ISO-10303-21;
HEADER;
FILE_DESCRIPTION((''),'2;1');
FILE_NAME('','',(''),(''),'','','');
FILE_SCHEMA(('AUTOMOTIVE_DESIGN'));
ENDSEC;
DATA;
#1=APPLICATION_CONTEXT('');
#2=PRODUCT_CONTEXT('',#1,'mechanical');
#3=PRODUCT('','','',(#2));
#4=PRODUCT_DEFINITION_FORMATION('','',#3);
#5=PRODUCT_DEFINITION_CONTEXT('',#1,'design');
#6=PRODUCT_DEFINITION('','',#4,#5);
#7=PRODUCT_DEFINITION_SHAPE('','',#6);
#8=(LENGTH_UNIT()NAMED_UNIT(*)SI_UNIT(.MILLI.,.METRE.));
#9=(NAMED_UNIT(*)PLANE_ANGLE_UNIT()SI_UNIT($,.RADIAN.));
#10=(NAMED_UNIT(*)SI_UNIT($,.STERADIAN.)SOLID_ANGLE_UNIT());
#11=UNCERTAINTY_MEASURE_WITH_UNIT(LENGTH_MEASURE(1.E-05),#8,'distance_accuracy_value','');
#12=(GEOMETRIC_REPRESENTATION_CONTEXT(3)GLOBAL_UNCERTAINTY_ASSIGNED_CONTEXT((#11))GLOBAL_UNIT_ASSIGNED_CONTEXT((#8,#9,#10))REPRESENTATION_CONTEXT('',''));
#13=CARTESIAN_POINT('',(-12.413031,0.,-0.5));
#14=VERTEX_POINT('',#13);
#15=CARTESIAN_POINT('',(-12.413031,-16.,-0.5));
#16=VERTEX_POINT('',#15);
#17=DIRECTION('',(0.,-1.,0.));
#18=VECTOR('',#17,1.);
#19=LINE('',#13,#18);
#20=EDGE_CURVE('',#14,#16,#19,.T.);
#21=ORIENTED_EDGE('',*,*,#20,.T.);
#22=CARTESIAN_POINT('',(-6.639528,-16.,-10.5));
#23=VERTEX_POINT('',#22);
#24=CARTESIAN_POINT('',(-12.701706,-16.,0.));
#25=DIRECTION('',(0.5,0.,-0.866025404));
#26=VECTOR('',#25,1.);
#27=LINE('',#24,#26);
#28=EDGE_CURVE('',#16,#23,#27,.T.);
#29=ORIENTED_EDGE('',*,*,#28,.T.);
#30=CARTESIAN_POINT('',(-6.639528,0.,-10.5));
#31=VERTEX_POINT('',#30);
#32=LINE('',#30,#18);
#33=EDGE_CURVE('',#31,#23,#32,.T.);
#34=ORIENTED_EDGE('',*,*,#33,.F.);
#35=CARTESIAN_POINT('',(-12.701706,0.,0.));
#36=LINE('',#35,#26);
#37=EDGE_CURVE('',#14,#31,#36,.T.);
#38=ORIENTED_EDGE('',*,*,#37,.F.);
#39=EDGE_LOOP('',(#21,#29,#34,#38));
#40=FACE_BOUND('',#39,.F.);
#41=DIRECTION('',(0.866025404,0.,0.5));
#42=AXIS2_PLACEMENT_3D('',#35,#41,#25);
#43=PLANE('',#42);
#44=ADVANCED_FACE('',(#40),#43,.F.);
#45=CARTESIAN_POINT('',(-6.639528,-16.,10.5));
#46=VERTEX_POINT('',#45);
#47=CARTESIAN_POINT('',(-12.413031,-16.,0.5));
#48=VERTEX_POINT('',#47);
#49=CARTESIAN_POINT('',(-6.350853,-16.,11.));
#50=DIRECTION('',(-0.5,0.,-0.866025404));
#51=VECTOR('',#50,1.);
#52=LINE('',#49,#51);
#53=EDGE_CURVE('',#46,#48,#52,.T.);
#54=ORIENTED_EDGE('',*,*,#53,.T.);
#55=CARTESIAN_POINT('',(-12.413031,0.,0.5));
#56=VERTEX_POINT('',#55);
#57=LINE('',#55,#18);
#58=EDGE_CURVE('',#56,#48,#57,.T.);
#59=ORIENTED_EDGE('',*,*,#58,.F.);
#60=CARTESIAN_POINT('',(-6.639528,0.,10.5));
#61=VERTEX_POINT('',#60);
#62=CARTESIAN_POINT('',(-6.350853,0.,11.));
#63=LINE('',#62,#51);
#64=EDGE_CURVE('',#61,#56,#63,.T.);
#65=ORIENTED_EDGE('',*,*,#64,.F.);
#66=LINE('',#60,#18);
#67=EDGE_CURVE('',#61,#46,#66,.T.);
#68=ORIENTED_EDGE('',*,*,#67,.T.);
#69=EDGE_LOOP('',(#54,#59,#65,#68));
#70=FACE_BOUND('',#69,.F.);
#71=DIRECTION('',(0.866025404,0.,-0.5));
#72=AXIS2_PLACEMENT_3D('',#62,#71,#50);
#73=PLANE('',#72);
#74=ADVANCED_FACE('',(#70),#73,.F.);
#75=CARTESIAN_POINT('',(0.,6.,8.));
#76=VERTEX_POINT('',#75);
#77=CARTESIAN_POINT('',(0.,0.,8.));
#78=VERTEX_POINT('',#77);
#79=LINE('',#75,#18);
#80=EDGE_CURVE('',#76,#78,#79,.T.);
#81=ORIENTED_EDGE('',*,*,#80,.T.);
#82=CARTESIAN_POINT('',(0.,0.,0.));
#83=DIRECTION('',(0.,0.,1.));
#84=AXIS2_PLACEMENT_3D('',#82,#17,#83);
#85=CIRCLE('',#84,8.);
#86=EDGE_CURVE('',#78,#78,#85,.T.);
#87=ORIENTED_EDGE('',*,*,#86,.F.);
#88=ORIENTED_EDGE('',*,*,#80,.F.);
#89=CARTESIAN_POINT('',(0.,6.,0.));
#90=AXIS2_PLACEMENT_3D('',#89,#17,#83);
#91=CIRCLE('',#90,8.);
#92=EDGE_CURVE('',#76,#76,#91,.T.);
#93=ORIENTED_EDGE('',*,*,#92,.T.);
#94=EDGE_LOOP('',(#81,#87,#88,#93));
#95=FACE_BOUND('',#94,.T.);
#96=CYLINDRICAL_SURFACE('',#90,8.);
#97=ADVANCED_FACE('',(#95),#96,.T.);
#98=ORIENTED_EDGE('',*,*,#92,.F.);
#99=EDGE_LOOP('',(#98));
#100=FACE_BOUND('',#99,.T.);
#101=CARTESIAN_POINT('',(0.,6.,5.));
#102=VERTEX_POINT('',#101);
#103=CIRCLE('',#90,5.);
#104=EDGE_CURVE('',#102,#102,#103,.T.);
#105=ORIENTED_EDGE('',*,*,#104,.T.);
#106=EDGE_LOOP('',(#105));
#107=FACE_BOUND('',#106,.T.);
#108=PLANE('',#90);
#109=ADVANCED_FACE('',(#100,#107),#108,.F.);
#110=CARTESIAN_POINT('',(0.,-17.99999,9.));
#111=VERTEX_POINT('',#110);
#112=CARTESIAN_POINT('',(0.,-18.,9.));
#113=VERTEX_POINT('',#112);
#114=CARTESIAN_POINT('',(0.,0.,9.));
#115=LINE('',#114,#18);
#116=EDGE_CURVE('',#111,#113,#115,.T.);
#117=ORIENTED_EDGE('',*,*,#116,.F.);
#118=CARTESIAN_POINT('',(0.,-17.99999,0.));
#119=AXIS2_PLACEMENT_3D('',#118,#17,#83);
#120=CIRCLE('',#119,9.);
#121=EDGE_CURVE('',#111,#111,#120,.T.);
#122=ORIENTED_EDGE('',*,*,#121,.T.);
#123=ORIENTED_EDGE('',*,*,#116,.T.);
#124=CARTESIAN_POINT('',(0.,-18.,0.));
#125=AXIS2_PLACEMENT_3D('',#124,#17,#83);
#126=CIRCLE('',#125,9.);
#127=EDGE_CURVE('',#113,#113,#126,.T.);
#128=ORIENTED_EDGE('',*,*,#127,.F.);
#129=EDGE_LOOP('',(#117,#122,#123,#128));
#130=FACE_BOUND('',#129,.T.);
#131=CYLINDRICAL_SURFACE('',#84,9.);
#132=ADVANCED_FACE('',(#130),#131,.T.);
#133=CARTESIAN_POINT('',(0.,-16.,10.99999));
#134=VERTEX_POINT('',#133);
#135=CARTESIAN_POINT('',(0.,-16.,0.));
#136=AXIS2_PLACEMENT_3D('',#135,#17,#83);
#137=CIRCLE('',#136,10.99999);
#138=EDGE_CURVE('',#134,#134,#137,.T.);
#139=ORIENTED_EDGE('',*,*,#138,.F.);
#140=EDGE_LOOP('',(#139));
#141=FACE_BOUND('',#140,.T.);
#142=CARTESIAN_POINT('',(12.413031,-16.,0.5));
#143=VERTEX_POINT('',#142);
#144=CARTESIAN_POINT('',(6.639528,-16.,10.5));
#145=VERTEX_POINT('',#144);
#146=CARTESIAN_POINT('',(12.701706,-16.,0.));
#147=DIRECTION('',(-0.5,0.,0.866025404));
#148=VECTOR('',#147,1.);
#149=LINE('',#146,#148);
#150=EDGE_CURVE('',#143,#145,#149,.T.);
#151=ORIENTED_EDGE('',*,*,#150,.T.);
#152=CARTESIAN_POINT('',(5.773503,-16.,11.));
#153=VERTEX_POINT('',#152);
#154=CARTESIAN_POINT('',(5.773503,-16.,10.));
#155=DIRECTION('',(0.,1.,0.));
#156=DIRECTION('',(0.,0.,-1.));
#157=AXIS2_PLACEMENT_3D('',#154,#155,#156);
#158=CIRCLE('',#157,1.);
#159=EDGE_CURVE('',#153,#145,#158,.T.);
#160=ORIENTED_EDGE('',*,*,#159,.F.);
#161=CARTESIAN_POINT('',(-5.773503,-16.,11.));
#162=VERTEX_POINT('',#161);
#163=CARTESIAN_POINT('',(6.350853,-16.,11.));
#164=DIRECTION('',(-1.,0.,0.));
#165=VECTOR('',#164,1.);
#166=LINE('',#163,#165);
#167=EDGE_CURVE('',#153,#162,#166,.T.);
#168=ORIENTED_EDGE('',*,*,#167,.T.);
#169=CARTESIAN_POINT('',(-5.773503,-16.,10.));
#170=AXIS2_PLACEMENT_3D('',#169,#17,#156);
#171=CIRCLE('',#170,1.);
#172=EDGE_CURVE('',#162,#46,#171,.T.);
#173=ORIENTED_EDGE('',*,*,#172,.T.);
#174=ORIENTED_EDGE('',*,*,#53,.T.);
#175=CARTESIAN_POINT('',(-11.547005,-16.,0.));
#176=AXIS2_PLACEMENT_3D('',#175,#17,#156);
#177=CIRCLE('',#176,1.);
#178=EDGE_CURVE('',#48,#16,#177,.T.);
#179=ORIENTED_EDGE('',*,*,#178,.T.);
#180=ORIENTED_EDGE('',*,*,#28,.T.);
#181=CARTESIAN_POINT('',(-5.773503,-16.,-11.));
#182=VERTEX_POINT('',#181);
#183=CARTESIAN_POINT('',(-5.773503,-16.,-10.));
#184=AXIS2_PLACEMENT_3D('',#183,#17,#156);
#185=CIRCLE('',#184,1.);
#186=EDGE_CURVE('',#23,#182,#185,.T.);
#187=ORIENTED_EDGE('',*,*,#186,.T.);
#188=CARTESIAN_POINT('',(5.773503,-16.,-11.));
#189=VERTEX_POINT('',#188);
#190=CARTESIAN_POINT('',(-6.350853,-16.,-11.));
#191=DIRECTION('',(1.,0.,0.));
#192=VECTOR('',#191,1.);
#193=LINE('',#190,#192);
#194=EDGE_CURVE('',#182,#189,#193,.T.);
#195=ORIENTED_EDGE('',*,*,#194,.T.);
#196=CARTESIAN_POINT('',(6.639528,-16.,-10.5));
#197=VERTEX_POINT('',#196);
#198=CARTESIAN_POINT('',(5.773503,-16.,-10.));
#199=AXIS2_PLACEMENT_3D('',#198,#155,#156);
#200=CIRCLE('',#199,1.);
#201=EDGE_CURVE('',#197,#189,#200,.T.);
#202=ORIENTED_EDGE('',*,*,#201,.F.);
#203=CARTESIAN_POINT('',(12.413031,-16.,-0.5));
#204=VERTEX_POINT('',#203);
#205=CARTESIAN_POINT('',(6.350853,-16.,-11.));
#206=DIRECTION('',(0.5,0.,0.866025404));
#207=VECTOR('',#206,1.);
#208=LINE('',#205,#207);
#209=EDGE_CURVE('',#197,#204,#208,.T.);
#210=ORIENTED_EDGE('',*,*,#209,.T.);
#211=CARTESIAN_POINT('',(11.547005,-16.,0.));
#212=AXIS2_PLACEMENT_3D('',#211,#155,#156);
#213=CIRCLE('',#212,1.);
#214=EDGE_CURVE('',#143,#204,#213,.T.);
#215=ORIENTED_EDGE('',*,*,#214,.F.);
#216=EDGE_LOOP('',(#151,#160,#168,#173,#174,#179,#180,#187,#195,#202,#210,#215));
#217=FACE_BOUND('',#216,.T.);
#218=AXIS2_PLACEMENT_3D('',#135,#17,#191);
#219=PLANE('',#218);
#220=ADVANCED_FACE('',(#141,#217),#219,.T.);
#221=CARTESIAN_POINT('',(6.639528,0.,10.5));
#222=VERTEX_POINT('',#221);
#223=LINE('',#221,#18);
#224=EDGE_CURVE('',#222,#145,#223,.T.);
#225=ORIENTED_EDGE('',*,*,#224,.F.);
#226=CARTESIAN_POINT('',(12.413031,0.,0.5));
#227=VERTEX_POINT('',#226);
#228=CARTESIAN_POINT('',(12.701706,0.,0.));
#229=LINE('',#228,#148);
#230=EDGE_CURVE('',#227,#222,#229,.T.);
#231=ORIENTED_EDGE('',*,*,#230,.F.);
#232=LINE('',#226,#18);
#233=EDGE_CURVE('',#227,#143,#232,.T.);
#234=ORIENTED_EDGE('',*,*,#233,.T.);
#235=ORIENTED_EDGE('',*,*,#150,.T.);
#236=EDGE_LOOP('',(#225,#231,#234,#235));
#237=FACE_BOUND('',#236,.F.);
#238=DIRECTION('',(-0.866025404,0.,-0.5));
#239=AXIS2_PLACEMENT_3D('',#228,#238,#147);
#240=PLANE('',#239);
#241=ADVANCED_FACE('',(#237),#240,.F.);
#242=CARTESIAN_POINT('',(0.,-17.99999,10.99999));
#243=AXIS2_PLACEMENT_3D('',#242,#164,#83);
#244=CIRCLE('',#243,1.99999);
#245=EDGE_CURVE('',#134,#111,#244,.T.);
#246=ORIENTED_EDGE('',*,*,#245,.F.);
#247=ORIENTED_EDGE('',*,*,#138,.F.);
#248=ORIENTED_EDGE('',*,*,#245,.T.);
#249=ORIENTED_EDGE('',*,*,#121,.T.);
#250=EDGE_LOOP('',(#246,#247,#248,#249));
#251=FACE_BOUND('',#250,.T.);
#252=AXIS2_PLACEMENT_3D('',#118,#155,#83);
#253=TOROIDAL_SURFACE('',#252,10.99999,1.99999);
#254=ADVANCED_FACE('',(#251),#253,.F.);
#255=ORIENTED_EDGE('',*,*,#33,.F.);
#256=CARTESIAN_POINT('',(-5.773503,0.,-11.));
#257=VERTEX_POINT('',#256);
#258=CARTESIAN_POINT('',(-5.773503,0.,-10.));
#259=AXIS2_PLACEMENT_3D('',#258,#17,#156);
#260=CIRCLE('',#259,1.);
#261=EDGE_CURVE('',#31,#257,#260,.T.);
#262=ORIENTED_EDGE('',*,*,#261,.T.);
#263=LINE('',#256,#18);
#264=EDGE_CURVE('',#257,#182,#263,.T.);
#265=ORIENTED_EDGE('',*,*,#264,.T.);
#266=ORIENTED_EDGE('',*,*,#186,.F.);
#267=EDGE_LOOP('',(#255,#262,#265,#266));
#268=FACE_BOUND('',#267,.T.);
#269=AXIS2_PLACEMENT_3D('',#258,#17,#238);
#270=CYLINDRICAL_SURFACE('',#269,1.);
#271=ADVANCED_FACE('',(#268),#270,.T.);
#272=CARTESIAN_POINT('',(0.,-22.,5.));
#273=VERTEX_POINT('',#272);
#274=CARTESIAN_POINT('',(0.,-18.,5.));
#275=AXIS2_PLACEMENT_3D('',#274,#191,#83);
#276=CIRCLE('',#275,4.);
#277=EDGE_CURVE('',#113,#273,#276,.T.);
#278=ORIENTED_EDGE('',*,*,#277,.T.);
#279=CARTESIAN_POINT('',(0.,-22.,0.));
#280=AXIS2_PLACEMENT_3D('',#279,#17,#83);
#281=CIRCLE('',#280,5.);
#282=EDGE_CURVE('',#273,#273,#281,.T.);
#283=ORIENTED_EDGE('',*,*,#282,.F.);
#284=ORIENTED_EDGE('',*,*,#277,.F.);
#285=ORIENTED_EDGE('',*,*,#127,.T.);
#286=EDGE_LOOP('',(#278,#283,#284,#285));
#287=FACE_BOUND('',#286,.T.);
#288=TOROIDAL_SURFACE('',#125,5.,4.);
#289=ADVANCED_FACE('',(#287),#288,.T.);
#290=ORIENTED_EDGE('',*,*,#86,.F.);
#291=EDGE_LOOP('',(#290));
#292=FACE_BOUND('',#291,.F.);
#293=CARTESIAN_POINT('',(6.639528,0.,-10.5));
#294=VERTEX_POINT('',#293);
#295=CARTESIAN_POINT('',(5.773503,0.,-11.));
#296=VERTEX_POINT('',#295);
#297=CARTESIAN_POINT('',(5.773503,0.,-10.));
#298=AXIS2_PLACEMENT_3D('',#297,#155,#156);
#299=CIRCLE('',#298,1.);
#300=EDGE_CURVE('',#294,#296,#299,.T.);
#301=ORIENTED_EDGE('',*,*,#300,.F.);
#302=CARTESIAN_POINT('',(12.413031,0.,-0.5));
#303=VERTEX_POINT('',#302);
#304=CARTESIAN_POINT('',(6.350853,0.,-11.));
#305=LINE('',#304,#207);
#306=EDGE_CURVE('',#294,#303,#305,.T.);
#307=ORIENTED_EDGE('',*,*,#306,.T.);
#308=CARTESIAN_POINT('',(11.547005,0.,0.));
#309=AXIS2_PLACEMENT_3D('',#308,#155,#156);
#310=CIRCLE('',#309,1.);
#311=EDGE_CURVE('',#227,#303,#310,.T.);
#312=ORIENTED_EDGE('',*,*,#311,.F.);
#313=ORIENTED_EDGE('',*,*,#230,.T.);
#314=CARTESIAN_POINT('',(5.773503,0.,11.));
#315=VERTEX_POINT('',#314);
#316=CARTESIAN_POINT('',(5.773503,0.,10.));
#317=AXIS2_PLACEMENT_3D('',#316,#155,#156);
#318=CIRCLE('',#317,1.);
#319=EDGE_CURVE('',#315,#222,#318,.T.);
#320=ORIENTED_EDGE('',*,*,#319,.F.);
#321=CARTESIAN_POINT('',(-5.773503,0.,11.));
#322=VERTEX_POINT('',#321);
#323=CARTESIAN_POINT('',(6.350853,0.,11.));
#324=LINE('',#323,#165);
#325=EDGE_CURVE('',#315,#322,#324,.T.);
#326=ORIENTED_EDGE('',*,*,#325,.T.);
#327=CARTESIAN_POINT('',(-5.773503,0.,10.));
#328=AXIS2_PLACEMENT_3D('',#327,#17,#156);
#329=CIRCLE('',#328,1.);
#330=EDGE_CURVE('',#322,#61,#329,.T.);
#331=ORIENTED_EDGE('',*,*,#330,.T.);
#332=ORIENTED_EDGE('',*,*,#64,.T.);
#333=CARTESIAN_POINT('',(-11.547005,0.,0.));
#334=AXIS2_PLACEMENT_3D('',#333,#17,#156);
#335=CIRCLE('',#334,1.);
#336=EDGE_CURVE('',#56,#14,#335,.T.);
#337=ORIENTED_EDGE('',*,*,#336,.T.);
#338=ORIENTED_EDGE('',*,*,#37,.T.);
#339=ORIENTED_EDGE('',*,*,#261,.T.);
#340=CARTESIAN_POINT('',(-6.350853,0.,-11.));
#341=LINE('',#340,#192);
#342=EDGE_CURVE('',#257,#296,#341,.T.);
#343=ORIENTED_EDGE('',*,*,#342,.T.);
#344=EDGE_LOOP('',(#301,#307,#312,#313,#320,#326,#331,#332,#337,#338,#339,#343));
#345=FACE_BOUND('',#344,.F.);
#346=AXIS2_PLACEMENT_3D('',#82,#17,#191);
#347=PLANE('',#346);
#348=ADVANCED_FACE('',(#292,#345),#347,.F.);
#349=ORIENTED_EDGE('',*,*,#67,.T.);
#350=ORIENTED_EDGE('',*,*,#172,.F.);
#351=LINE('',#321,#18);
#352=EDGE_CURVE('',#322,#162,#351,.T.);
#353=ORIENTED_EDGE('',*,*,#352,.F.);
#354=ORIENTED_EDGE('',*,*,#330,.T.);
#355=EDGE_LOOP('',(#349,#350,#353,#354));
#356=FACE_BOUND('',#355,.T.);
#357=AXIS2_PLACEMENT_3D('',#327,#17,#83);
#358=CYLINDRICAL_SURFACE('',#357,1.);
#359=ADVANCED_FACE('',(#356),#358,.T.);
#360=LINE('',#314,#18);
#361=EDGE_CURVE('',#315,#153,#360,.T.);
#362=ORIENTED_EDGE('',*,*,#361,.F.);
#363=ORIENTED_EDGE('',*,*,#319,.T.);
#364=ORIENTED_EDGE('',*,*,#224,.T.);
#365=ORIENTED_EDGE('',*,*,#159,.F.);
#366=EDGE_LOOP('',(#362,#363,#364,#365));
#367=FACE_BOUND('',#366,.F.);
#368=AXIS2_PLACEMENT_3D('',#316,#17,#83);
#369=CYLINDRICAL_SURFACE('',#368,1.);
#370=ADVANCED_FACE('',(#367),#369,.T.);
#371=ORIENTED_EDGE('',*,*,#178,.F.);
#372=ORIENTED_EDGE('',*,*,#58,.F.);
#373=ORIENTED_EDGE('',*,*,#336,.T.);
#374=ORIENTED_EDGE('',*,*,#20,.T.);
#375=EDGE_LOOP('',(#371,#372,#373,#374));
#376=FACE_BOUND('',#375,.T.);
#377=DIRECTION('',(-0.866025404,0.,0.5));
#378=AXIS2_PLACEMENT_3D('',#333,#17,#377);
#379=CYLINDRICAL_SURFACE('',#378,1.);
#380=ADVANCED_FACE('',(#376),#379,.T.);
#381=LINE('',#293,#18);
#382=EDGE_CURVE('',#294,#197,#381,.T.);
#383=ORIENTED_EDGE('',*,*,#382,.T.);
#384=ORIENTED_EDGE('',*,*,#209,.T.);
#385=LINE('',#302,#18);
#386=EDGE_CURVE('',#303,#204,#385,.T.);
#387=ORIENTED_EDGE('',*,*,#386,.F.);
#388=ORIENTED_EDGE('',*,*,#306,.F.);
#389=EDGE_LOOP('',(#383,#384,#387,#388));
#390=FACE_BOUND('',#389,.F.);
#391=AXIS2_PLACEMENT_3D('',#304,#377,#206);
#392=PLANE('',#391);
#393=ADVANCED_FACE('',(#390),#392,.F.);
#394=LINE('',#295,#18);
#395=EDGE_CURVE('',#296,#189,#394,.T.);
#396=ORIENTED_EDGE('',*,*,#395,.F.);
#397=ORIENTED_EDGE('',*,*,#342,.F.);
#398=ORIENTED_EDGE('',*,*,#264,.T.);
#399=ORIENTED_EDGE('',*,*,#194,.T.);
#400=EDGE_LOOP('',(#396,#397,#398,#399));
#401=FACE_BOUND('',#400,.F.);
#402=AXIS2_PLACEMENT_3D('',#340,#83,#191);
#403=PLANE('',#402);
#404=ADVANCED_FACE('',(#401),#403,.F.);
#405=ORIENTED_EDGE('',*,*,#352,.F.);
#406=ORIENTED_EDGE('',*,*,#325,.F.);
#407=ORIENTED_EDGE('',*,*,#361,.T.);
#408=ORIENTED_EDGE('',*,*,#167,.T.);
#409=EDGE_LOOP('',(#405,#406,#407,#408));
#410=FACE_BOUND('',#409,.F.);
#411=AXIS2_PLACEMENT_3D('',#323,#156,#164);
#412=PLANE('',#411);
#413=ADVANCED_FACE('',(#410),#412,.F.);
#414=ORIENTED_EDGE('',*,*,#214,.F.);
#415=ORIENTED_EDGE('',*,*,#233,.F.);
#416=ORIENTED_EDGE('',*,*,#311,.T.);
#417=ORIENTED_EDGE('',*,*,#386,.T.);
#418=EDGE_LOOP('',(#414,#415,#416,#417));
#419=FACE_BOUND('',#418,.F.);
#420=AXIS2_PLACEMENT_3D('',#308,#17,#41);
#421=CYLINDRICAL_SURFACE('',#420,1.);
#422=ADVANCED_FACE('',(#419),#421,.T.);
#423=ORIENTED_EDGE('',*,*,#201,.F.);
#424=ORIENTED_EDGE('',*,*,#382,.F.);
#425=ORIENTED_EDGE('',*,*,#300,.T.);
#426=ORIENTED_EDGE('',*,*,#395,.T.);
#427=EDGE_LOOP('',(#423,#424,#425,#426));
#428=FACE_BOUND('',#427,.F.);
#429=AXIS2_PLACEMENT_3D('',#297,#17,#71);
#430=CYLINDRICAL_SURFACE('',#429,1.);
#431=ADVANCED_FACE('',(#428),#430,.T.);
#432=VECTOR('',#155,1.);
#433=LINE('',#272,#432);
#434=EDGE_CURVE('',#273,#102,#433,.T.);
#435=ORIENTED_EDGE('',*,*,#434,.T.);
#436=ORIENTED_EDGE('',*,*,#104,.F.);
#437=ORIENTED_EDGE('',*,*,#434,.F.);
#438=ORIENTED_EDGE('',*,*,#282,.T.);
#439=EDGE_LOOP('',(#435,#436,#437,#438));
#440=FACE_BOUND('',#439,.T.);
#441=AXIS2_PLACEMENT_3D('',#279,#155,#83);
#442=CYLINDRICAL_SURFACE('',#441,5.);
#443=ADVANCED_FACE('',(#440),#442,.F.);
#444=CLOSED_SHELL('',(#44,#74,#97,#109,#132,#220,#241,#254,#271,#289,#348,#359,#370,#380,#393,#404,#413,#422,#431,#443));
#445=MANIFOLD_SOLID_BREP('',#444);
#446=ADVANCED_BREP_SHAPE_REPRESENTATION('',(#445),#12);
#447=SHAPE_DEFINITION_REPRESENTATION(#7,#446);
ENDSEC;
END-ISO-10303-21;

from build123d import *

# Parameters (mm, degrees)
F0_R     = 5
F3_DEPTH = 16
F4_R     = 1.99999
F5_R     = 1


# Not quite as in the source:
# - a fillet or chamfer is up to 0.001 mm smaller than in the source, because OpenCascade refuses the exact size


with BuildPart() as f2:
    # F1 (on Right) → F2 (revolve)
    with BuildSketch(Plane.YZ):
        with BuildLine():
            Line((0, 8), (0, 9))
            Line((0, 9), (-18, 9))
            ThreePointArc((-18, 9), (-20.8284271247, 7.8284271247), (-22, 5))
            Line((-22, 5), (0, 5))
            Line((0, 5), (6, 5))
            Line((6, 5), (6, 8))
            Line((6, 8), (0, 8))
        make_face()
    revolve(axis=Axis((0, -24.3240110576, 0), (0, -1, 0)))

    # F0 (on Front) → F3 (join)
    with BuildSketch(Plane.XZ):
        Polygon((6.3508529611, 11), (-6.3508529611, 11), (-12.7017059222, 0), (-6.3508529611, -11), (6.3508529611, -11), (12.7017059222, 0), align=None)
        Circle(F0_R, mode=Mode.SUBTRACT)
    extrude(amount=F3_DEPTH)

    # F4 (radius 2 in the source; OpenCascade refuses exactly that, so slightly less here)
    f4_edges = [f2.edges().sort_by_distance(p)[0] for p in [
        (0, -16, -9),
    ]]
    fillet(f4_edges, radius=F4_R)

    # F5
    f5_edges = [f2.edges().sort_by_distance(p)[0] for p in [
        (-6.350853, -8, 11),
        (-12.701706, -8, 0),
        (-6.350853, -8, -11),
        (6.350853, -8, -11),
        (12.701706, -8, 0),
        (6.350853, -8, 11),
    ]]
    fillet(f5_edges, radius=F5_R)


solid = f2.part
